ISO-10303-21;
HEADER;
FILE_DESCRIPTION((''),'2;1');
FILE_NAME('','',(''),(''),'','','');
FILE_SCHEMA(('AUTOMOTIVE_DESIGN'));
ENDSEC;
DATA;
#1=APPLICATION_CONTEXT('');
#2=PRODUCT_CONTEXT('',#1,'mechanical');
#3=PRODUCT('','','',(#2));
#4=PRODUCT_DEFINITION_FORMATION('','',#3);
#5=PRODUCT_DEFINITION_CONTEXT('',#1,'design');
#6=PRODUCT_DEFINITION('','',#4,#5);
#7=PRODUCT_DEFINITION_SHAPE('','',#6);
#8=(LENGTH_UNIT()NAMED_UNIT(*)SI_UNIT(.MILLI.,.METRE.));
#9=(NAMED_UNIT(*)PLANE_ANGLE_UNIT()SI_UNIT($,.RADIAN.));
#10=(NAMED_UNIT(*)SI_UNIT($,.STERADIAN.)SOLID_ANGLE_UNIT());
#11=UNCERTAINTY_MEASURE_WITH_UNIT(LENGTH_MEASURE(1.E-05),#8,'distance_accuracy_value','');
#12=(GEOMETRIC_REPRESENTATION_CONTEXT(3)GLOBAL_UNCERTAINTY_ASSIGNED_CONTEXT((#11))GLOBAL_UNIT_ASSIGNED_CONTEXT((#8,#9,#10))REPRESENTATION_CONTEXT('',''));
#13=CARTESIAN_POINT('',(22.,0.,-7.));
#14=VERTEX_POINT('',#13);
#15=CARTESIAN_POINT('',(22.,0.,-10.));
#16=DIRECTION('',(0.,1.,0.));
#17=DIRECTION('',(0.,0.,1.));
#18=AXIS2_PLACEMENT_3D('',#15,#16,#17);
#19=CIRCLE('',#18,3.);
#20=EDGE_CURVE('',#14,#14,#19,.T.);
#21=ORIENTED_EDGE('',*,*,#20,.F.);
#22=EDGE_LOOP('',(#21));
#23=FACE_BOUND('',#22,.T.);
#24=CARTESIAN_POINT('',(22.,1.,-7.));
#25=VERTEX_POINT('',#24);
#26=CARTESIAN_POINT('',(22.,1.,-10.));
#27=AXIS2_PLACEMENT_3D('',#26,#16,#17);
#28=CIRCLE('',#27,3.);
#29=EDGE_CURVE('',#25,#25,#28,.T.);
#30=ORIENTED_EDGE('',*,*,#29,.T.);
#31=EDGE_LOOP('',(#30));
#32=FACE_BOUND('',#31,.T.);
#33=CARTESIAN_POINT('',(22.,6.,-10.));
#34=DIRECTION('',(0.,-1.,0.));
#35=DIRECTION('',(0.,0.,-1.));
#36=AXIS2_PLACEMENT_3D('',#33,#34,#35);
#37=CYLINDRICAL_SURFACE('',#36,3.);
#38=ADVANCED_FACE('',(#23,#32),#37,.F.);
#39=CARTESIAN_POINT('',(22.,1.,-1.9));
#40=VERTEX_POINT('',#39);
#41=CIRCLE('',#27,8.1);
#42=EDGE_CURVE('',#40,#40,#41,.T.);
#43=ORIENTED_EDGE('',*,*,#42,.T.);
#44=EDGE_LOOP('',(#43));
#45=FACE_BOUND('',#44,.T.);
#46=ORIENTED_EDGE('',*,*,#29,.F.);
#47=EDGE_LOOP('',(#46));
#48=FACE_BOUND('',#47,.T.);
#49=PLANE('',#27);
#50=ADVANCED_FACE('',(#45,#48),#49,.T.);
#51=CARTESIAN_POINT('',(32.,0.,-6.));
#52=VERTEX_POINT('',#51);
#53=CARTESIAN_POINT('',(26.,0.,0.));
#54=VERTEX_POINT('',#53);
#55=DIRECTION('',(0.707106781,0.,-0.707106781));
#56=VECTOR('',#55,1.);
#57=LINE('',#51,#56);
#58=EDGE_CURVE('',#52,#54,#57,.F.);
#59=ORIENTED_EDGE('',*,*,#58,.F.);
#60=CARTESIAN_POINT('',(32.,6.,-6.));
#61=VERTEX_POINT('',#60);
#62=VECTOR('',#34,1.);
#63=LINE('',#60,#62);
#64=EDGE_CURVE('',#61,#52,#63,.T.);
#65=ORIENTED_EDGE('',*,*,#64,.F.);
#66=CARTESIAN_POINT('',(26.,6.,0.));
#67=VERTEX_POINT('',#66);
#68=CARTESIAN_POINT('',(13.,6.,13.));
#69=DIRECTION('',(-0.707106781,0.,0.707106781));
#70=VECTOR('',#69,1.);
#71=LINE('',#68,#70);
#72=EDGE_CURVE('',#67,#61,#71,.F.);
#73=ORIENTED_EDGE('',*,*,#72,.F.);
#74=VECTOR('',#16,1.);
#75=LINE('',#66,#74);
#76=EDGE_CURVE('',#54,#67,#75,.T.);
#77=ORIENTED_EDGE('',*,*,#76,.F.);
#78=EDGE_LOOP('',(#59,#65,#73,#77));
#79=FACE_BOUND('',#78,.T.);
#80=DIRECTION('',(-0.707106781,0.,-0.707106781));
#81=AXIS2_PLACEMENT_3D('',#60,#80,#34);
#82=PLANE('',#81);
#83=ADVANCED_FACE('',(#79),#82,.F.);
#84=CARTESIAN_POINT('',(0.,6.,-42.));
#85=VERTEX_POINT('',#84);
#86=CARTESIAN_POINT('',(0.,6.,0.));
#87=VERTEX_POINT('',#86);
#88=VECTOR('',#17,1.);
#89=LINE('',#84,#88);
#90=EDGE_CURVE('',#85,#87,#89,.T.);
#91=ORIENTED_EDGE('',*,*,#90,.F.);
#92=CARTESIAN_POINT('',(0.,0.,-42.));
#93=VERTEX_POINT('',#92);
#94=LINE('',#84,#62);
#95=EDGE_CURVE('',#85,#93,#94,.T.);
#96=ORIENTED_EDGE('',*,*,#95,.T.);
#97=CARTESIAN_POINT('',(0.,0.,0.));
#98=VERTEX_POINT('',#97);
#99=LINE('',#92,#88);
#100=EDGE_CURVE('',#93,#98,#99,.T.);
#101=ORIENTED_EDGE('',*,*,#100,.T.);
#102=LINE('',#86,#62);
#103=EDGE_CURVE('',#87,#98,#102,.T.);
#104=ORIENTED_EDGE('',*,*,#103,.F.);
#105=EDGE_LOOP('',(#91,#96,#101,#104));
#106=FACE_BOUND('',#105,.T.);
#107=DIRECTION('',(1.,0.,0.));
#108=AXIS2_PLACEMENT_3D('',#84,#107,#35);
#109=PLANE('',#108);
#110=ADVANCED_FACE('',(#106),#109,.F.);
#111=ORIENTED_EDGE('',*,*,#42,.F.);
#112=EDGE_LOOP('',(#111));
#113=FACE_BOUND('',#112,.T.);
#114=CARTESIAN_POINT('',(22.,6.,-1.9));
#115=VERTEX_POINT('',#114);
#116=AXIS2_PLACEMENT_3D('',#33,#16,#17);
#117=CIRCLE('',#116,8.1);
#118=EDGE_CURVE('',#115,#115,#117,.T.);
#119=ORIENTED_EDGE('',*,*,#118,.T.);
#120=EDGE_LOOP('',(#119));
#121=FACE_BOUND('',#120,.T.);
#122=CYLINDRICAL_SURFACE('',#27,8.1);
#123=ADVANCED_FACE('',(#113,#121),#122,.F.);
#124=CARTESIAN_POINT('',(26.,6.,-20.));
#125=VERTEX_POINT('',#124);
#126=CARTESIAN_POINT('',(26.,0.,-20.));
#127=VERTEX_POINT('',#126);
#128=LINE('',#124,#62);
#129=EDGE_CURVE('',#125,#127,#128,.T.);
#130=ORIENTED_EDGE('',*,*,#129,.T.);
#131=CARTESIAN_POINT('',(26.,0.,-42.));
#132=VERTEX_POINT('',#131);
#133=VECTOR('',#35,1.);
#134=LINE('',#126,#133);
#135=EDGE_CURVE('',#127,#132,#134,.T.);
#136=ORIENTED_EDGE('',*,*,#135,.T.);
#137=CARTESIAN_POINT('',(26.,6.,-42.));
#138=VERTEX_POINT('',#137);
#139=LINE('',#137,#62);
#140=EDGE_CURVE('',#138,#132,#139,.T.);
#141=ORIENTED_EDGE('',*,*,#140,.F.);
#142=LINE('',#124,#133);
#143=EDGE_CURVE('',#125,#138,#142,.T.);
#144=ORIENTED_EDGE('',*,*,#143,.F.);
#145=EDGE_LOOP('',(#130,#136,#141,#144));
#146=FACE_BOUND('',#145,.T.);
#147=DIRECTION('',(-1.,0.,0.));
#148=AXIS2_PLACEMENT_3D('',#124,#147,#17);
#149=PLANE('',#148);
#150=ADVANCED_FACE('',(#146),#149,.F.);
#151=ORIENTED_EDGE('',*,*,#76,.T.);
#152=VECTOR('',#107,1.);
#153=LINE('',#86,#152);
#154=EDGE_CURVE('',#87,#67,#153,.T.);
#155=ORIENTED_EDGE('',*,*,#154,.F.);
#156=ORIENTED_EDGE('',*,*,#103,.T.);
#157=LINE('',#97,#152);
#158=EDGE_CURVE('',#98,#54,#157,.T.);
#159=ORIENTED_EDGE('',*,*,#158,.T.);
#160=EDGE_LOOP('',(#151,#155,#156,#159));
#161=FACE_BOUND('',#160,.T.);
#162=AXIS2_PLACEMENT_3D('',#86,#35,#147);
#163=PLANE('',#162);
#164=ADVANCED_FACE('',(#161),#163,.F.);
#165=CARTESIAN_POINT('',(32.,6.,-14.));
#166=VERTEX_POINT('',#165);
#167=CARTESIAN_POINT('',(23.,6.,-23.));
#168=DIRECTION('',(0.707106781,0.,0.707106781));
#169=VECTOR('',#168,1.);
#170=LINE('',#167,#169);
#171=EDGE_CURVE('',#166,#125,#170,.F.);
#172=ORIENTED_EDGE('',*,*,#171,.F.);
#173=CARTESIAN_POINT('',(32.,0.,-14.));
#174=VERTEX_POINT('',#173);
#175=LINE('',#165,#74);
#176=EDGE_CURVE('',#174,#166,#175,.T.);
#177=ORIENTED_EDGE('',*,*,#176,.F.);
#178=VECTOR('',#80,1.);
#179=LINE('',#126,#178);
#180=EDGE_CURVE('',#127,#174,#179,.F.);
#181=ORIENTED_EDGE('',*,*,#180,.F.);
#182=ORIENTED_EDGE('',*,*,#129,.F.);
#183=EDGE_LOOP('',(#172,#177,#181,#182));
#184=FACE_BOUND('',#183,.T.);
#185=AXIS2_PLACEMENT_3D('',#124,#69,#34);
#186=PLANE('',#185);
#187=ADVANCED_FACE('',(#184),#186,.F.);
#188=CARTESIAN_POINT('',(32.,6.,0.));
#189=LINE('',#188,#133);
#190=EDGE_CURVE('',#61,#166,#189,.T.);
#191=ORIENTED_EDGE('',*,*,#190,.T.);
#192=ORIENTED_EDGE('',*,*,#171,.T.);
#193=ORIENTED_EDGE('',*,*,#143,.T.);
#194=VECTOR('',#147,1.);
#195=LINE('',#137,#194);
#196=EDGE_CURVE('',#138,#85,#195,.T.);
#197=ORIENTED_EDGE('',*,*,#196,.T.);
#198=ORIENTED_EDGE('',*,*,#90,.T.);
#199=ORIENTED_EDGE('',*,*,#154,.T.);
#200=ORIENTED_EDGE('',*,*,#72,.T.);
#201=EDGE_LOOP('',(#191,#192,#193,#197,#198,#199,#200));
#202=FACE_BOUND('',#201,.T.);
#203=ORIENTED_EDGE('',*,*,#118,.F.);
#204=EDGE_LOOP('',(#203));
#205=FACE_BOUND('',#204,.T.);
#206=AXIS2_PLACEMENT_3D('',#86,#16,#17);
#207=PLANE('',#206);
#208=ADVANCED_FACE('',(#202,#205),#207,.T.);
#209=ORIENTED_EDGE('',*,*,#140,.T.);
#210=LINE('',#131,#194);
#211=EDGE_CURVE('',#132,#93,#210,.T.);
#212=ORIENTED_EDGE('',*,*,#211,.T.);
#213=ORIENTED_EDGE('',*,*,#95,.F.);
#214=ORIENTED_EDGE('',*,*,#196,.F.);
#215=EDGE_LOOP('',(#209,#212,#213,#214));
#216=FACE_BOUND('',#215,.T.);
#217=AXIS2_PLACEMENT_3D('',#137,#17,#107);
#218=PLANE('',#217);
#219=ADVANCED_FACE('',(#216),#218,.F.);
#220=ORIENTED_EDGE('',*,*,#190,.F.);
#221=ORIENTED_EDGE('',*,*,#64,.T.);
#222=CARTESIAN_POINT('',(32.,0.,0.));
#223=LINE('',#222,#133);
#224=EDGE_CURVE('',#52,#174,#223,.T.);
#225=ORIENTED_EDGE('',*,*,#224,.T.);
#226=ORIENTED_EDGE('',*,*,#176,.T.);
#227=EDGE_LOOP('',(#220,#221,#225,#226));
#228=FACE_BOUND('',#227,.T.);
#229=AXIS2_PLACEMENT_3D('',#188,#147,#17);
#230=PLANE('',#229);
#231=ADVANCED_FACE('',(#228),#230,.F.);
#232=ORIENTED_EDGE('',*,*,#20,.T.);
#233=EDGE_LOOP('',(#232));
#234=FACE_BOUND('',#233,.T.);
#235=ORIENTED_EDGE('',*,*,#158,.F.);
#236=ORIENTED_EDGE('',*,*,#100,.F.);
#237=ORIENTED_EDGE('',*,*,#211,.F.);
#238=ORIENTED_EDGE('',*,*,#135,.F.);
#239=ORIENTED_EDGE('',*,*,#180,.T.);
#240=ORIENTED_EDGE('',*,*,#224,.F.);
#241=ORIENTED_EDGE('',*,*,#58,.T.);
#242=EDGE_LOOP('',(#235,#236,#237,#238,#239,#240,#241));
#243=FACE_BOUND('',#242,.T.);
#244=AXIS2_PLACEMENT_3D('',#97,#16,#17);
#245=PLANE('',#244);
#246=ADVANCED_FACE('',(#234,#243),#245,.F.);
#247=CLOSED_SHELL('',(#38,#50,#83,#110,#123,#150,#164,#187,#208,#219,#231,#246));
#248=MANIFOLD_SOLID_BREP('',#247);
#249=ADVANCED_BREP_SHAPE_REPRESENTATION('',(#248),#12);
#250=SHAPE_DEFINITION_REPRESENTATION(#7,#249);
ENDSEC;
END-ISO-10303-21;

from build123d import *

# Parameters (mm, degrees)
SKETCH1_R           = 3
BOSS_EXTRUDE1_DEPTH = 6
CHAMFER1_SIZE       = 6
SKETCH2_R           = 8.1
CUT_EXTRUDE1_DEPTH  = 5


with BuildPart() as part:
    # Sketch1 → Boss-Extrude1 (new body)
    with BuildSketch(Plane(origin=(0, 0, 0), x_dir=(1, 0, 0), z_dir=(0, 1, 0))):
        Polygon((0, 0), (32, 0), (32, 20), (26, 20), (26, 42), (0, 42), align=None)
        with Locations(Location((22, 10, 0), (0, 0, 270))):
            Circle(SKETCH1_R, mode=Mode.SUBTRACT)
    extrude(amount=BOSS_EXTRUDE1_DEPTH)

    # Chamfer1
    chamfer1_edges = [part.edges().sort_by_distance(p)[0] for p in [
        (32, 3, -20),
        (32, 3, 0),
    ]]
    chamfer(chamfer1_edges, length=CHAMFER1_SIZE - 0.0001)  # a hair under: the kernel refuses the full size

    # Sketch2 → Cut-Extrude1 (cut)
    with BuildSketch(Plane(origin=(0, 6, 0), x_dir=(1, 0, 0), z_dir=(0, 1, 0))):
        with Locations(Location((22, 10, 0), (0, 0, 270))):
            Circle(SKETCH2_R)
    extrude(amount=-CUT_EXTRUDE1_DEPTH, mode=Mode.SUBTRACT)


solid = part.part
